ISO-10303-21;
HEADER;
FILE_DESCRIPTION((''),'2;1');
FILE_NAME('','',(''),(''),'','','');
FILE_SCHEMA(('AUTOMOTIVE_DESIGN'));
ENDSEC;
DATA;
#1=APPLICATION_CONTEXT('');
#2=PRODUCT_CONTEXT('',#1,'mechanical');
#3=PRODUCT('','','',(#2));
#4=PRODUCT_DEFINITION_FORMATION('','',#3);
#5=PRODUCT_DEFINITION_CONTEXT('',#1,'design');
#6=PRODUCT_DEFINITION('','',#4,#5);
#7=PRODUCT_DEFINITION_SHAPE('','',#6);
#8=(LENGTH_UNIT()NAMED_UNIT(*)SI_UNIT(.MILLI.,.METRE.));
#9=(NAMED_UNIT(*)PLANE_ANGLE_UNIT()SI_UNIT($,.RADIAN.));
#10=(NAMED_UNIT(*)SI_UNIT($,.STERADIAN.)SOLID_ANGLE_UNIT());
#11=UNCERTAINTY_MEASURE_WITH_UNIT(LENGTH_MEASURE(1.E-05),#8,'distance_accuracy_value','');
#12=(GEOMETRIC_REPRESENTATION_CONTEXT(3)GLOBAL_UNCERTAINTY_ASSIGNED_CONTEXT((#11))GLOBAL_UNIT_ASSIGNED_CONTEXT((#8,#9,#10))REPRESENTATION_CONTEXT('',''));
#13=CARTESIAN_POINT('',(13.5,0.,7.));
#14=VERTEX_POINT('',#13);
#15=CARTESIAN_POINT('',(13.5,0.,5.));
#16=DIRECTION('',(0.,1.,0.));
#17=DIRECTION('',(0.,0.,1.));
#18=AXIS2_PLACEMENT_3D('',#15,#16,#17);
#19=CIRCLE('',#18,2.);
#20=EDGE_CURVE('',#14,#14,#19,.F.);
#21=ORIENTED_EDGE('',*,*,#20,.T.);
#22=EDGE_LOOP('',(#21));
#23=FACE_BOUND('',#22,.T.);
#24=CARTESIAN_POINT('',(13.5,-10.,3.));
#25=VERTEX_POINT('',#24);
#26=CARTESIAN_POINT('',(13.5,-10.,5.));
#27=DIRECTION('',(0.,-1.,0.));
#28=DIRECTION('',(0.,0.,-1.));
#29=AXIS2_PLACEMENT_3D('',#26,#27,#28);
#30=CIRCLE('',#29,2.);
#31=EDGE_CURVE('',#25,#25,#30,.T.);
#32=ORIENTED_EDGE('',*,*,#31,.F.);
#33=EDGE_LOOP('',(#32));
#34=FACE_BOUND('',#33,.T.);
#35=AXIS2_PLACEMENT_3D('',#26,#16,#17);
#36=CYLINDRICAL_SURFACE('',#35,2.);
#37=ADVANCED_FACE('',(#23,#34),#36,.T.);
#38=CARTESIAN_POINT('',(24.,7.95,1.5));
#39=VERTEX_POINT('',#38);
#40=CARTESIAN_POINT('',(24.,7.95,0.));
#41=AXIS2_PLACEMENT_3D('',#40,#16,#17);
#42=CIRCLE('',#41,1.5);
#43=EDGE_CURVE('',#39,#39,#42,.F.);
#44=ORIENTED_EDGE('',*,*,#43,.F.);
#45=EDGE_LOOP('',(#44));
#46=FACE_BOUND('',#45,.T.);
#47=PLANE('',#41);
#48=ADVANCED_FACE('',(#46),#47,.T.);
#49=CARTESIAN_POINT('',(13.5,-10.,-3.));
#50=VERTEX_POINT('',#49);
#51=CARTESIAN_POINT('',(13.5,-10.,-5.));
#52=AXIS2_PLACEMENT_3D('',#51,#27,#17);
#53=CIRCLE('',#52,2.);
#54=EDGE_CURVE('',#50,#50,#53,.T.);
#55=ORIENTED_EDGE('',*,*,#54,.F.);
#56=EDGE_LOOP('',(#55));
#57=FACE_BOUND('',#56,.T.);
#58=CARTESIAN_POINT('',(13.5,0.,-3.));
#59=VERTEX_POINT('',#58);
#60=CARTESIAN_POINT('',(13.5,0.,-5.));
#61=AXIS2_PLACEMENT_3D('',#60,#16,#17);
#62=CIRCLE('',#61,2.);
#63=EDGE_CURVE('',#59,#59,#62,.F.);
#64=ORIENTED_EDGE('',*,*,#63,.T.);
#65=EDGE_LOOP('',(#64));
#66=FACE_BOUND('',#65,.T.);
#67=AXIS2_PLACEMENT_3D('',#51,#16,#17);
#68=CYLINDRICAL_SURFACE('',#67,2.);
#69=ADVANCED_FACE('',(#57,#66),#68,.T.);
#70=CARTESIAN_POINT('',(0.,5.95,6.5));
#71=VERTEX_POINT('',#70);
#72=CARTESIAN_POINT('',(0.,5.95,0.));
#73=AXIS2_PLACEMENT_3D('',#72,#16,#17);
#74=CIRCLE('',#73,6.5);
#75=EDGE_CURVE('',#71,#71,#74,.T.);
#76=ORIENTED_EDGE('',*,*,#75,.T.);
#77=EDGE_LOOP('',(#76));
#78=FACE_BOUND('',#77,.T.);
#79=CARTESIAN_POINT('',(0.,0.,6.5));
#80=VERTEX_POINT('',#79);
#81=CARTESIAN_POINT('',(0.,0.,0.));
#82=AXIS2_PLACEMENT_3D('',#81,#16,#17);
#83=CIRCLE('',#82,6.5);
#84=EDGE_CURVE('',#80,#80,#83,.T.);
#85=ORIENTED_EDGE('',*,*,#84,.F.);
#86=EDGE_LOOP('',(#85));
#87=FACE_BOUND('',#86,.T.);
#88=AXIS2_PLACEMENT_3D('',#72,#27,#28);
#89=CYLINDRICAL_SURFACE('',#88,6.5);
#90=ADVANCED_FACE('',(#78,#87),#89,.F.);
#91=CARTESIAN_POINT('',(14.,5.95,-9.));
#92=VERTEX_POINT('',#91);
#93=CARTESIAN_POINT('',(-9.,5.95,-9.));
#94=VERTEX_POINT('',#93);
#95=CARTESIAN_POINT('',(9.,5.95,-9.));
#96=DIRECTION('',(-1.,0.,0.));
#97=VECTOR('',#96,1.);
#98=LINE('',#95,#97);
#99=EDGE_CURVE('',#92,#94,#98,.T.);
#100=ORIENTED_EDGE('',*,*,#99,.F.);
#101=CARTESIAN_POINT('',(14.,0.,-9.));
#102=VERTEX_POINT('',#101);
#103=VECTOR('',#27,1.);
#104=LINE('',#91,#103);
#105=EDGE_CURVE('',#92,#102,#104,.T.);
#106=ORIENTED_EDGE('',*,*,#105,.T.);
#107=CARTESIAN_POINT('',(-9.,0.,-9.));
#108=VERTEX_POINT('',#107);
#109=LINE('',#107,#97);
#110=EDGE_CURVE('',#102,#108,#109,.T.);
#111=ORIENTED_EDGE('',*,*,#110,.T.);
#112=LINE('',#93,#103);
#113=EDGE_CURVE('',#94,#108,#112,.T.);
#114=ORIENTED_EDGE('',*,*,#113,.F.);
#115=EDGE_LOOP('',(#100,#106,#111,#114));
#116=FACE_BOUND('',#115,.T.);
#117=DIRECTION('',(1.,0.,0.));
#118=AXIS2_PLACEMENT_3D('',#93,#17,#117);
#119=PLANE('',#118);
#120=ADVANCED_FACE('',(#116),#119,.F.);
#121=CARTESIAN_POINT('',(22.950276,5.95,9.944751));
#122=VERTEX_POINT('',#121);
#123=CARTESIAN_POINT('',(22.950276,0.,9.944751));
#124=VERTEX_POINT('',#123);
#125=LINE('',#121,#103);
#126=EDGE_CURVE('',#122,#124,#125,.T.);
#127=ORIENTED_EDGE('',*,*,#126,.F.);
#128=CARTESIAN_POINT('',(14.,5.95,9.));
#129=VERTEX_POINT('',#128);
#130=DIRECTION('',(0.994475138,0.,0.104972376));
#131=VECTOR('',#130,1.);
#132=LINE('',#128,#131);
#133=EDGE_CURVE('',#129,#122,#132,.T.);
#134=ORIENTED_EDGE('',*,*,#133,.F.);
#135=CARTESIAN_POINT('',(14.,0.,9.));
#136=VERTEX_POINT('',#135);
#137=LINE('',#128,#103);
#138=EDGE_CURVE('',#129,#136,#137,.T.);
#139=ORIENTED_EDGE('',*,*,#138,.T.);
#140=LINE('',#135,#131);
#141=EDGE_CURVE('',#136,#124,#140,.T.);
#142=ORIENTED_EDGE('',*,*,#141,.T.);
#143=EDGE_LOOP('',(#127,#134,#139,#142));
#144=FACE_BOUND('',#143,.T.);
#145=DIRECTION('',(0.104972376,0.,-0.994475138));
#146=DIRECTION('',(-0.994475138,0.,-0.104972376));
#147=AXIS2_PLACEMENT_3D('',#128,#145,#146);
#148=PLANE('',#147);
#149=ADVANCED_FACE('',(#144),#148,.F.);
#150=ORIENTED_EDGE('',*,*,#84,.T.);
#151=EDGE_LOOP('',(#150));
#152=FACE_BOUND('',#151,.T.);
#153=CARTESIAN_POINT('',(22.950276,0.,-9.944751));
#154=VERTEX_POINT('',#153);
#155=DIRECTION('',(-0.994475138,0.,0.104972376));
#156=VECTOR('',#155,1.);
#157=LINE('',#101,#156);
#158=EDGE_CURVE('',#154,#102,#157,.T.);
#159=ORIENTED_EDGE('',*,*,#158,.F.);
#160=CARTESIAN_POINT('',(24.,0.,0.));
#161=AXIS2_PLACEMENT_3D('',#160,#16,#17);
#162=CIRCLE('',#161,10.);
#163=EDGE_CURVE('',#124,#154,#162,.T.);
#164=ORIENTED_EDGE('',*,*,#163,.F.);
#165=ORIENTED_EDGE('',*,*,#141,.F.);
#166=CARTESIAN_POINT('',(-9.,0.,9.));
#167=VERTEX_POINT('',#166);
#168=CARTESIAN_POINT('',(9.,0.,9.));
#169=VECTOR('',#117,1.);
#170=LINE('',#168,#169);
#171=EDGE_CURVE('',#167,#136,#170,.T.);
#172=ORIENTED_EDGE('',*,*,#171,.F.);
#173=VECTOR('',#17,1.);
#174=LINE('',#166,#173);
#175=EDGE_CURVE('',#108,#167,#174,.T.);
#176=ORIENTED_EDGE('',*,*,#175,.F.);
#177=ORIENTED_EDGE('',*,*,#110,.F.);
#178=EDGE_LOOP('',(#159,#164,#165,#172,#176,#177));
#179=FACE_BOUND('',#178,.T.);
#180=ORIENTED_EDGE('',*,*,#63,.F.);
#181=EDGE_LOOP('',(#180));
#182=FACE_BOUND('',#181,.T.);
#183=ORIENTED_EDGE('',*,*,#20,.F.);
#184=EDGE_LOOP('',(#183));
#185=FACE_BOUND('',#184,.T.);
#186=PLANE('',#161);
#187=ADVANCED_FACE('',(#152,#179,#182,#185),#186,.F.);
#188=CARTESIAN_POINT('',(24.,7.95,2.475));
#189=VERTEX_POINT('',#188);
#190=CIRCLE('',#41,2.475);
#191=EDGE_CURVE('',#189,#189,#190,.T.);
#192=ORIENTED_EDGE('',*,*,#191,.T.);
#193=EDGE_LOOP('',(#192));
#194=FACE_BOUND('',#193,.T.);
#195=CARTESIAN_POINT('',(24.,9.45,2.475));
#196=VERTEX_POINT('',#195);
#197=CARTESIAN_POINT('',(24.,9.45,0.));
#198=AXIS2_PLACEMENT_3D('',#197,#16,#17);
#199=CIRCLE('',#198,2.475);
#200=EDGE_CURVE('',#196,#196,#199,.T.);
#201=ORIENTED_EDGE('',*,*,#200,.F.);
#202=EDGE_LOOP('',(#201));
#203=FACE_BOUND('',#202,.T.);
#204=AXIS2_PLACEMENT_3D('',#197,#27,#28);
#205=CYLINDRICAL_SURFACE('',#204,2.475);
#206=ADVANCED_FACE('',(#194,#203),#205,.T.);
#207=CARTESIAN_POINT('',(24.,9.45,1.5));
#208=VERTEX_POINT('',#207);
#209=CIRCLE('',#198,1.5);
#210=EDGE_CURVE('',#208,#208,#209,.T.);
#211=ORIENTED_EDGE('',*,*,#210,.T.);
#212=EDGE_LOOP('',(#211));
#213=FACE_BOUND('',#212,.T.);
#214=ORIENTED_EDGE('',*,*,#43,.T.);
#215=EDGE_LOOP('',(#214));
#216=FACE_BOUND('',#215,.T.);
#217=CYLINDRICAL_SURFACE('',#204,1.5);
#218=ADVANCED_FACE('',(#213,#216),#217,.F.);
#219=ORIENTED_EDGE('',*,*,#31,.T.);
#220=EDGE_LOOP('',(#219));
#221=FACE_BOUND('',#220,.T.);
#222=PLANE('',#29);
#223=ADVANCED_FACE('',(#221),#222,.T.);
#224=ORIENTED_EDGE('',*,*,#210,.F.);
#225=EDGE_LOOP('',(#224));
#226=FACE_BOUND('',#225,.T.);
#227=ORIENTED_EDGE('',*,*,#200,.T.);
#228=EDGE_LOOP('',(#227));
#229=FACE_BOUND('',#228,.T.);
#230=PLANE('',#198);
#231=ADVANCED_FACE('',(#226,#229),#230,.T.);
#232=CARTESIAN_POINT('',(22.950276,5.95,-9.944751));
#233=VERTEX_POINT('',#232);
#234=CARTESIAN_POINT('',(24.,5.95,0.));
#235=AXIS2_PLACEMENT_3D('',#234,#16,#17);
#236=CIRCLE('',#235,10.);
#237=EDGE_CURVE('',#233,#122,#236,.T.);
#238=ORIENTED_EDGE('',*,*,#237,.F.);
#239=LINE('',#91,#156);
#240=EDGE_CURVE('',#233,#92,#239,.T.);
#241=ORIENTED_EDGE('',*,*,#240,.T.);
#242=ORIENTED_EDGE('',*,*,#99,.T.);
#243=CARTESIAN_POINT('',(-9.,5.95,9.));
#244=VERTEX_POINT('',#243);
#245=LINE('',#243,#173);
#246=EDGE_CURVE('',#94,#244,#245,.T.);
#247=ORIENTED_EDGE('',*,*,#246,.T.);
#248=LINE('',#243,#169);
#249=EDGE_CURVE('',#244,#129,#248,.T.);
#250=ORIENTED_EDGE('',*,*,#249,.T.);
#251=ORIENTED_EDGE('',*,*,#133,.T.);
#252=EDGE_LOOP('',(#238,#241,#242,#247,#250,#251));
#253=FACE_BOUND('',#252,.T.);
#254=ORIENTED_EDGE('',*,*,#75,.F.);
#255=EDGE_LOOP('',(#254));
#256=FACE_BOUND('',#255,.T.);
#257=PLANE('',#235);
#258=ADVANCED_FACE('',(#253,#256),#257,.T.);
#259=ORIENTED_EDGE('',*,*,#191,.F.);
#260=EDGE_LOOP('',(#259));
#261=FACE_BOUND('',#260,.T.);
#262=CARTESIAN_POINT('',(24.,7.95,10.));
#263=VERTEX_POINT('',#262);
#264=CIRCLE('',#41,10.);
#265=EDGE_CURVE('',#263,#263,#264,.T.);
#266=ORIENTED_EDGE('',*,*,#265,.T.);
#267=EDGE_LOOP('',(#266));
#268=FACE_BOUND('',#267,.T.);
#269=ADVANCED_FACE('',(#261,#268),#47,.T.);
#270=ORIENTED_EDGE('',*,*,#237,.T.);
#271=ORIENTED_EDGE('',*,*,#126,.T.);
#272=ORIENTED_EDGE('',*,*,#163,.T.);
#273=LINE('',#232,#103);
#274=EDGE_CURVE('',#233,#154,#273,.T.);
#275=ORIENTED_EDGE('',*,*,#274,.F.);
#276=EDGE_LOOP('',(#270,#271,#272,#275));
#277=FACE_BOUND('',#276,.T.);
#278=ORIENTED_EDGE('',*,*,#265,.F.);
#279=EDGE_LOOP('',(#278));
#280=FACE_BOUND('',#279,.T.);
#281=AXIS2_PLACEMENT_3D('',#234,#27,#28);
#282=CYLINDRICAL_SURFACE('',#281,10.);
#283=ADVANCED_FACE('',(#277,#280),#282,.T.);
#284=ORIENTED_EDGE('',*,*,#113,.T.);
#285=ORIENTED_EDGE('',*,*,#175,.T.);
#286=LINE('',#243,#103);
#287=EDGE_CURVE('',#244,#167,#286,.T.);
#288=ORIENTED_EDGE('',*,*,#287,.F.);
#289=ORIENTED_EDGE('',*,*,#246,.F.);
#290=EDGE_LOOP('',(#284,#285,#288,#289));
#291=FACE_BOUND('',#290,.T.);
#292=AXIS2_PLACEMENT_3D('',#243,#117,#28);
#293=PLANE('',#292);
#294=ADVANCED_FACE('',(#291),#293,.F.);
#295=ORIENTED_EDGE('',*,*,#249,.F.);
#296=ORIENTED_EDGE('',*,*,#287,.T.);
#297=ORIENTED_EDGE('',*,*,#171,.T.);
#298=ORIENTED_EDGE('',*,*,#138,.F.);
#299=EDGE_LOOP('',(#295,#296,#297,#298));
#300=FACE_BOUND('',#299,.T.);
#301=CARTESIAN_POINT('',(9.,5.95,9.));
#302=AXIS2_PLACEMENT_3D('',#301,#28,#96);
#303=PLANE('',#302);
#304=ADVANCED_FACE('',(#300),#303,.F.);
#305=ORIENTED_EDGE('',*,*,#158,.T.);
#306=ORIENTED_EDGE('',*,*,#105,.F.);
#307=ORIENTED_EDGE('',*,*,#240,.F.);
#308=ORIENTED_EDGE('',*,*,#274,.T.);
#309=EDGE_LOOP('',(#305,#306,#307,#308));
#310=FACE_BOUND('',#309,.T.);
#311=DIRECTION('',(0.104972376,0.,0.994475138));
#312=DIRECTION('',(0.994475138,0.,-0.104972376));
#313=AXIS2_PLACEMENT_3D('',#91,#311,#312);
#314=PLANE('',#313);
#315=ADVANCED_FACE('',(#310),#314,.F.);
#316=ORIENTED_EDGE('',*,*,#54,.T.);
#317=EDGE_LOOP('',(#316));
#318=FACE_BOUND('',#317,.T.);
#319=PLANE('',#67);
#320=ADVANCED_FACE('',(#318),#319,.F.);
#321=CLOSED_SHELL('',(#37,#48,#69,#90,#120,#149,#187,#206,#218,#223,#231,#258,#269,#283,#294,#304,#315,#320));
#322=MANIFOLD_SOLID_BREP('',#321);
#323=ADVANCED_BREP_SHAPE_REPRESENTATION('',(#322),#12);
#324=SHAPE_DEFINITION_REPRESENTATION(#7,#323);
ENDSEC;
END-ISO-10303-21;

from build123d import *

# Parameters (mm, degrees)
BOSS_EXTRUDE2_OUTLINE_R = 6.5
BOSS_EXTRUDE2_DEPTH     = 5.95
SKETCH3_R               = 10
BOSS_EXTRUDE3_DEPTH     = 2
SKETCH4_R               = 2
BOSS_EXTRUDE4_DEPTH     = 10
SKETCH5_R               = 2.475
SKETCH5_R_2             = 1.5
BOSS_EXTRUDE5_DEPTH     = 1.5


# Read off the part's stored shape, not the designer's step: Boss-Extrude2
with BuildPart() as part:
    # Boss-Extrude2 outline → Boss-Extrude2 (new body)
    with BuildSketch(Plane(origin=(0, 0, 0), x_dir=(1, 0, 0), z_dir=(0, 1, 0))):
        with BuildLine():
            Line((14, 9), (-9, 9))
            Line((-9, 9), (-9, -9))
            Line((-9, -9), (14, -9))
            Line((14, -9), (22.950276243, -9.944751381))
            ThreePointArc((22.950276243, -9.944751381), (34, 0), (22.950276243, 9.944751381))
            Line((22.950276243, 9.944751381), (14, 9))
        make_face()
        Circle(BOSS_EXTRUDE2_OUTLINE_R, mode=Mode.SUBTRACT)
    extrude(amount=BOSS_EXTRUDE2_DEPTH)

    # Sketch3 → Boss-Extrude3 (add)
    with BuildSketch(Plane(origin=(0, 5.95, 0), x_dir=(1, 0, 0), z_dir=(0, 1, 0))):
        with Locations(Location((24, 0, 0), (0, 0, 96.025575008))):
            Circle(SKETCH3_R)
    extrude(amount=BOSS_EXTRUDE3_DEPTH)

    # Sketch4 → Boss-Extrude4 (add)
    with BuildSketch(Plane.XZ):
        with Locations(Location((13.5, 5, 0), (0, 0, 90))):
            Circle(SKETCH4_R)
        with Locations(Location((13.5, -5, 0), (0, 0, 90))):
            Circle(SKETCH4_R)
    extrude(amount=BOSS_EXTRUDE4_DEPTH)

    # Sketch5 → Boss-Extrude5 (add)
    with BuildSketch(Plane(origin=(0, 7.95, 0), x_dir=(1, 0, 0), z_dir=(0, 1, 0))):
        with Locations(Location((24, 0, 0), (0, 0, 270))):
            Circle(SKETCH5_R)
        with Locations(Location((24, 0, 0), (0, 0, 270))):
            Circle(SKETCH5_R_2, mode=Mode.SUBTRACT)
    extrude(amount=BOSS_EXTRUDE5_DEPTH)


solid = part.part
